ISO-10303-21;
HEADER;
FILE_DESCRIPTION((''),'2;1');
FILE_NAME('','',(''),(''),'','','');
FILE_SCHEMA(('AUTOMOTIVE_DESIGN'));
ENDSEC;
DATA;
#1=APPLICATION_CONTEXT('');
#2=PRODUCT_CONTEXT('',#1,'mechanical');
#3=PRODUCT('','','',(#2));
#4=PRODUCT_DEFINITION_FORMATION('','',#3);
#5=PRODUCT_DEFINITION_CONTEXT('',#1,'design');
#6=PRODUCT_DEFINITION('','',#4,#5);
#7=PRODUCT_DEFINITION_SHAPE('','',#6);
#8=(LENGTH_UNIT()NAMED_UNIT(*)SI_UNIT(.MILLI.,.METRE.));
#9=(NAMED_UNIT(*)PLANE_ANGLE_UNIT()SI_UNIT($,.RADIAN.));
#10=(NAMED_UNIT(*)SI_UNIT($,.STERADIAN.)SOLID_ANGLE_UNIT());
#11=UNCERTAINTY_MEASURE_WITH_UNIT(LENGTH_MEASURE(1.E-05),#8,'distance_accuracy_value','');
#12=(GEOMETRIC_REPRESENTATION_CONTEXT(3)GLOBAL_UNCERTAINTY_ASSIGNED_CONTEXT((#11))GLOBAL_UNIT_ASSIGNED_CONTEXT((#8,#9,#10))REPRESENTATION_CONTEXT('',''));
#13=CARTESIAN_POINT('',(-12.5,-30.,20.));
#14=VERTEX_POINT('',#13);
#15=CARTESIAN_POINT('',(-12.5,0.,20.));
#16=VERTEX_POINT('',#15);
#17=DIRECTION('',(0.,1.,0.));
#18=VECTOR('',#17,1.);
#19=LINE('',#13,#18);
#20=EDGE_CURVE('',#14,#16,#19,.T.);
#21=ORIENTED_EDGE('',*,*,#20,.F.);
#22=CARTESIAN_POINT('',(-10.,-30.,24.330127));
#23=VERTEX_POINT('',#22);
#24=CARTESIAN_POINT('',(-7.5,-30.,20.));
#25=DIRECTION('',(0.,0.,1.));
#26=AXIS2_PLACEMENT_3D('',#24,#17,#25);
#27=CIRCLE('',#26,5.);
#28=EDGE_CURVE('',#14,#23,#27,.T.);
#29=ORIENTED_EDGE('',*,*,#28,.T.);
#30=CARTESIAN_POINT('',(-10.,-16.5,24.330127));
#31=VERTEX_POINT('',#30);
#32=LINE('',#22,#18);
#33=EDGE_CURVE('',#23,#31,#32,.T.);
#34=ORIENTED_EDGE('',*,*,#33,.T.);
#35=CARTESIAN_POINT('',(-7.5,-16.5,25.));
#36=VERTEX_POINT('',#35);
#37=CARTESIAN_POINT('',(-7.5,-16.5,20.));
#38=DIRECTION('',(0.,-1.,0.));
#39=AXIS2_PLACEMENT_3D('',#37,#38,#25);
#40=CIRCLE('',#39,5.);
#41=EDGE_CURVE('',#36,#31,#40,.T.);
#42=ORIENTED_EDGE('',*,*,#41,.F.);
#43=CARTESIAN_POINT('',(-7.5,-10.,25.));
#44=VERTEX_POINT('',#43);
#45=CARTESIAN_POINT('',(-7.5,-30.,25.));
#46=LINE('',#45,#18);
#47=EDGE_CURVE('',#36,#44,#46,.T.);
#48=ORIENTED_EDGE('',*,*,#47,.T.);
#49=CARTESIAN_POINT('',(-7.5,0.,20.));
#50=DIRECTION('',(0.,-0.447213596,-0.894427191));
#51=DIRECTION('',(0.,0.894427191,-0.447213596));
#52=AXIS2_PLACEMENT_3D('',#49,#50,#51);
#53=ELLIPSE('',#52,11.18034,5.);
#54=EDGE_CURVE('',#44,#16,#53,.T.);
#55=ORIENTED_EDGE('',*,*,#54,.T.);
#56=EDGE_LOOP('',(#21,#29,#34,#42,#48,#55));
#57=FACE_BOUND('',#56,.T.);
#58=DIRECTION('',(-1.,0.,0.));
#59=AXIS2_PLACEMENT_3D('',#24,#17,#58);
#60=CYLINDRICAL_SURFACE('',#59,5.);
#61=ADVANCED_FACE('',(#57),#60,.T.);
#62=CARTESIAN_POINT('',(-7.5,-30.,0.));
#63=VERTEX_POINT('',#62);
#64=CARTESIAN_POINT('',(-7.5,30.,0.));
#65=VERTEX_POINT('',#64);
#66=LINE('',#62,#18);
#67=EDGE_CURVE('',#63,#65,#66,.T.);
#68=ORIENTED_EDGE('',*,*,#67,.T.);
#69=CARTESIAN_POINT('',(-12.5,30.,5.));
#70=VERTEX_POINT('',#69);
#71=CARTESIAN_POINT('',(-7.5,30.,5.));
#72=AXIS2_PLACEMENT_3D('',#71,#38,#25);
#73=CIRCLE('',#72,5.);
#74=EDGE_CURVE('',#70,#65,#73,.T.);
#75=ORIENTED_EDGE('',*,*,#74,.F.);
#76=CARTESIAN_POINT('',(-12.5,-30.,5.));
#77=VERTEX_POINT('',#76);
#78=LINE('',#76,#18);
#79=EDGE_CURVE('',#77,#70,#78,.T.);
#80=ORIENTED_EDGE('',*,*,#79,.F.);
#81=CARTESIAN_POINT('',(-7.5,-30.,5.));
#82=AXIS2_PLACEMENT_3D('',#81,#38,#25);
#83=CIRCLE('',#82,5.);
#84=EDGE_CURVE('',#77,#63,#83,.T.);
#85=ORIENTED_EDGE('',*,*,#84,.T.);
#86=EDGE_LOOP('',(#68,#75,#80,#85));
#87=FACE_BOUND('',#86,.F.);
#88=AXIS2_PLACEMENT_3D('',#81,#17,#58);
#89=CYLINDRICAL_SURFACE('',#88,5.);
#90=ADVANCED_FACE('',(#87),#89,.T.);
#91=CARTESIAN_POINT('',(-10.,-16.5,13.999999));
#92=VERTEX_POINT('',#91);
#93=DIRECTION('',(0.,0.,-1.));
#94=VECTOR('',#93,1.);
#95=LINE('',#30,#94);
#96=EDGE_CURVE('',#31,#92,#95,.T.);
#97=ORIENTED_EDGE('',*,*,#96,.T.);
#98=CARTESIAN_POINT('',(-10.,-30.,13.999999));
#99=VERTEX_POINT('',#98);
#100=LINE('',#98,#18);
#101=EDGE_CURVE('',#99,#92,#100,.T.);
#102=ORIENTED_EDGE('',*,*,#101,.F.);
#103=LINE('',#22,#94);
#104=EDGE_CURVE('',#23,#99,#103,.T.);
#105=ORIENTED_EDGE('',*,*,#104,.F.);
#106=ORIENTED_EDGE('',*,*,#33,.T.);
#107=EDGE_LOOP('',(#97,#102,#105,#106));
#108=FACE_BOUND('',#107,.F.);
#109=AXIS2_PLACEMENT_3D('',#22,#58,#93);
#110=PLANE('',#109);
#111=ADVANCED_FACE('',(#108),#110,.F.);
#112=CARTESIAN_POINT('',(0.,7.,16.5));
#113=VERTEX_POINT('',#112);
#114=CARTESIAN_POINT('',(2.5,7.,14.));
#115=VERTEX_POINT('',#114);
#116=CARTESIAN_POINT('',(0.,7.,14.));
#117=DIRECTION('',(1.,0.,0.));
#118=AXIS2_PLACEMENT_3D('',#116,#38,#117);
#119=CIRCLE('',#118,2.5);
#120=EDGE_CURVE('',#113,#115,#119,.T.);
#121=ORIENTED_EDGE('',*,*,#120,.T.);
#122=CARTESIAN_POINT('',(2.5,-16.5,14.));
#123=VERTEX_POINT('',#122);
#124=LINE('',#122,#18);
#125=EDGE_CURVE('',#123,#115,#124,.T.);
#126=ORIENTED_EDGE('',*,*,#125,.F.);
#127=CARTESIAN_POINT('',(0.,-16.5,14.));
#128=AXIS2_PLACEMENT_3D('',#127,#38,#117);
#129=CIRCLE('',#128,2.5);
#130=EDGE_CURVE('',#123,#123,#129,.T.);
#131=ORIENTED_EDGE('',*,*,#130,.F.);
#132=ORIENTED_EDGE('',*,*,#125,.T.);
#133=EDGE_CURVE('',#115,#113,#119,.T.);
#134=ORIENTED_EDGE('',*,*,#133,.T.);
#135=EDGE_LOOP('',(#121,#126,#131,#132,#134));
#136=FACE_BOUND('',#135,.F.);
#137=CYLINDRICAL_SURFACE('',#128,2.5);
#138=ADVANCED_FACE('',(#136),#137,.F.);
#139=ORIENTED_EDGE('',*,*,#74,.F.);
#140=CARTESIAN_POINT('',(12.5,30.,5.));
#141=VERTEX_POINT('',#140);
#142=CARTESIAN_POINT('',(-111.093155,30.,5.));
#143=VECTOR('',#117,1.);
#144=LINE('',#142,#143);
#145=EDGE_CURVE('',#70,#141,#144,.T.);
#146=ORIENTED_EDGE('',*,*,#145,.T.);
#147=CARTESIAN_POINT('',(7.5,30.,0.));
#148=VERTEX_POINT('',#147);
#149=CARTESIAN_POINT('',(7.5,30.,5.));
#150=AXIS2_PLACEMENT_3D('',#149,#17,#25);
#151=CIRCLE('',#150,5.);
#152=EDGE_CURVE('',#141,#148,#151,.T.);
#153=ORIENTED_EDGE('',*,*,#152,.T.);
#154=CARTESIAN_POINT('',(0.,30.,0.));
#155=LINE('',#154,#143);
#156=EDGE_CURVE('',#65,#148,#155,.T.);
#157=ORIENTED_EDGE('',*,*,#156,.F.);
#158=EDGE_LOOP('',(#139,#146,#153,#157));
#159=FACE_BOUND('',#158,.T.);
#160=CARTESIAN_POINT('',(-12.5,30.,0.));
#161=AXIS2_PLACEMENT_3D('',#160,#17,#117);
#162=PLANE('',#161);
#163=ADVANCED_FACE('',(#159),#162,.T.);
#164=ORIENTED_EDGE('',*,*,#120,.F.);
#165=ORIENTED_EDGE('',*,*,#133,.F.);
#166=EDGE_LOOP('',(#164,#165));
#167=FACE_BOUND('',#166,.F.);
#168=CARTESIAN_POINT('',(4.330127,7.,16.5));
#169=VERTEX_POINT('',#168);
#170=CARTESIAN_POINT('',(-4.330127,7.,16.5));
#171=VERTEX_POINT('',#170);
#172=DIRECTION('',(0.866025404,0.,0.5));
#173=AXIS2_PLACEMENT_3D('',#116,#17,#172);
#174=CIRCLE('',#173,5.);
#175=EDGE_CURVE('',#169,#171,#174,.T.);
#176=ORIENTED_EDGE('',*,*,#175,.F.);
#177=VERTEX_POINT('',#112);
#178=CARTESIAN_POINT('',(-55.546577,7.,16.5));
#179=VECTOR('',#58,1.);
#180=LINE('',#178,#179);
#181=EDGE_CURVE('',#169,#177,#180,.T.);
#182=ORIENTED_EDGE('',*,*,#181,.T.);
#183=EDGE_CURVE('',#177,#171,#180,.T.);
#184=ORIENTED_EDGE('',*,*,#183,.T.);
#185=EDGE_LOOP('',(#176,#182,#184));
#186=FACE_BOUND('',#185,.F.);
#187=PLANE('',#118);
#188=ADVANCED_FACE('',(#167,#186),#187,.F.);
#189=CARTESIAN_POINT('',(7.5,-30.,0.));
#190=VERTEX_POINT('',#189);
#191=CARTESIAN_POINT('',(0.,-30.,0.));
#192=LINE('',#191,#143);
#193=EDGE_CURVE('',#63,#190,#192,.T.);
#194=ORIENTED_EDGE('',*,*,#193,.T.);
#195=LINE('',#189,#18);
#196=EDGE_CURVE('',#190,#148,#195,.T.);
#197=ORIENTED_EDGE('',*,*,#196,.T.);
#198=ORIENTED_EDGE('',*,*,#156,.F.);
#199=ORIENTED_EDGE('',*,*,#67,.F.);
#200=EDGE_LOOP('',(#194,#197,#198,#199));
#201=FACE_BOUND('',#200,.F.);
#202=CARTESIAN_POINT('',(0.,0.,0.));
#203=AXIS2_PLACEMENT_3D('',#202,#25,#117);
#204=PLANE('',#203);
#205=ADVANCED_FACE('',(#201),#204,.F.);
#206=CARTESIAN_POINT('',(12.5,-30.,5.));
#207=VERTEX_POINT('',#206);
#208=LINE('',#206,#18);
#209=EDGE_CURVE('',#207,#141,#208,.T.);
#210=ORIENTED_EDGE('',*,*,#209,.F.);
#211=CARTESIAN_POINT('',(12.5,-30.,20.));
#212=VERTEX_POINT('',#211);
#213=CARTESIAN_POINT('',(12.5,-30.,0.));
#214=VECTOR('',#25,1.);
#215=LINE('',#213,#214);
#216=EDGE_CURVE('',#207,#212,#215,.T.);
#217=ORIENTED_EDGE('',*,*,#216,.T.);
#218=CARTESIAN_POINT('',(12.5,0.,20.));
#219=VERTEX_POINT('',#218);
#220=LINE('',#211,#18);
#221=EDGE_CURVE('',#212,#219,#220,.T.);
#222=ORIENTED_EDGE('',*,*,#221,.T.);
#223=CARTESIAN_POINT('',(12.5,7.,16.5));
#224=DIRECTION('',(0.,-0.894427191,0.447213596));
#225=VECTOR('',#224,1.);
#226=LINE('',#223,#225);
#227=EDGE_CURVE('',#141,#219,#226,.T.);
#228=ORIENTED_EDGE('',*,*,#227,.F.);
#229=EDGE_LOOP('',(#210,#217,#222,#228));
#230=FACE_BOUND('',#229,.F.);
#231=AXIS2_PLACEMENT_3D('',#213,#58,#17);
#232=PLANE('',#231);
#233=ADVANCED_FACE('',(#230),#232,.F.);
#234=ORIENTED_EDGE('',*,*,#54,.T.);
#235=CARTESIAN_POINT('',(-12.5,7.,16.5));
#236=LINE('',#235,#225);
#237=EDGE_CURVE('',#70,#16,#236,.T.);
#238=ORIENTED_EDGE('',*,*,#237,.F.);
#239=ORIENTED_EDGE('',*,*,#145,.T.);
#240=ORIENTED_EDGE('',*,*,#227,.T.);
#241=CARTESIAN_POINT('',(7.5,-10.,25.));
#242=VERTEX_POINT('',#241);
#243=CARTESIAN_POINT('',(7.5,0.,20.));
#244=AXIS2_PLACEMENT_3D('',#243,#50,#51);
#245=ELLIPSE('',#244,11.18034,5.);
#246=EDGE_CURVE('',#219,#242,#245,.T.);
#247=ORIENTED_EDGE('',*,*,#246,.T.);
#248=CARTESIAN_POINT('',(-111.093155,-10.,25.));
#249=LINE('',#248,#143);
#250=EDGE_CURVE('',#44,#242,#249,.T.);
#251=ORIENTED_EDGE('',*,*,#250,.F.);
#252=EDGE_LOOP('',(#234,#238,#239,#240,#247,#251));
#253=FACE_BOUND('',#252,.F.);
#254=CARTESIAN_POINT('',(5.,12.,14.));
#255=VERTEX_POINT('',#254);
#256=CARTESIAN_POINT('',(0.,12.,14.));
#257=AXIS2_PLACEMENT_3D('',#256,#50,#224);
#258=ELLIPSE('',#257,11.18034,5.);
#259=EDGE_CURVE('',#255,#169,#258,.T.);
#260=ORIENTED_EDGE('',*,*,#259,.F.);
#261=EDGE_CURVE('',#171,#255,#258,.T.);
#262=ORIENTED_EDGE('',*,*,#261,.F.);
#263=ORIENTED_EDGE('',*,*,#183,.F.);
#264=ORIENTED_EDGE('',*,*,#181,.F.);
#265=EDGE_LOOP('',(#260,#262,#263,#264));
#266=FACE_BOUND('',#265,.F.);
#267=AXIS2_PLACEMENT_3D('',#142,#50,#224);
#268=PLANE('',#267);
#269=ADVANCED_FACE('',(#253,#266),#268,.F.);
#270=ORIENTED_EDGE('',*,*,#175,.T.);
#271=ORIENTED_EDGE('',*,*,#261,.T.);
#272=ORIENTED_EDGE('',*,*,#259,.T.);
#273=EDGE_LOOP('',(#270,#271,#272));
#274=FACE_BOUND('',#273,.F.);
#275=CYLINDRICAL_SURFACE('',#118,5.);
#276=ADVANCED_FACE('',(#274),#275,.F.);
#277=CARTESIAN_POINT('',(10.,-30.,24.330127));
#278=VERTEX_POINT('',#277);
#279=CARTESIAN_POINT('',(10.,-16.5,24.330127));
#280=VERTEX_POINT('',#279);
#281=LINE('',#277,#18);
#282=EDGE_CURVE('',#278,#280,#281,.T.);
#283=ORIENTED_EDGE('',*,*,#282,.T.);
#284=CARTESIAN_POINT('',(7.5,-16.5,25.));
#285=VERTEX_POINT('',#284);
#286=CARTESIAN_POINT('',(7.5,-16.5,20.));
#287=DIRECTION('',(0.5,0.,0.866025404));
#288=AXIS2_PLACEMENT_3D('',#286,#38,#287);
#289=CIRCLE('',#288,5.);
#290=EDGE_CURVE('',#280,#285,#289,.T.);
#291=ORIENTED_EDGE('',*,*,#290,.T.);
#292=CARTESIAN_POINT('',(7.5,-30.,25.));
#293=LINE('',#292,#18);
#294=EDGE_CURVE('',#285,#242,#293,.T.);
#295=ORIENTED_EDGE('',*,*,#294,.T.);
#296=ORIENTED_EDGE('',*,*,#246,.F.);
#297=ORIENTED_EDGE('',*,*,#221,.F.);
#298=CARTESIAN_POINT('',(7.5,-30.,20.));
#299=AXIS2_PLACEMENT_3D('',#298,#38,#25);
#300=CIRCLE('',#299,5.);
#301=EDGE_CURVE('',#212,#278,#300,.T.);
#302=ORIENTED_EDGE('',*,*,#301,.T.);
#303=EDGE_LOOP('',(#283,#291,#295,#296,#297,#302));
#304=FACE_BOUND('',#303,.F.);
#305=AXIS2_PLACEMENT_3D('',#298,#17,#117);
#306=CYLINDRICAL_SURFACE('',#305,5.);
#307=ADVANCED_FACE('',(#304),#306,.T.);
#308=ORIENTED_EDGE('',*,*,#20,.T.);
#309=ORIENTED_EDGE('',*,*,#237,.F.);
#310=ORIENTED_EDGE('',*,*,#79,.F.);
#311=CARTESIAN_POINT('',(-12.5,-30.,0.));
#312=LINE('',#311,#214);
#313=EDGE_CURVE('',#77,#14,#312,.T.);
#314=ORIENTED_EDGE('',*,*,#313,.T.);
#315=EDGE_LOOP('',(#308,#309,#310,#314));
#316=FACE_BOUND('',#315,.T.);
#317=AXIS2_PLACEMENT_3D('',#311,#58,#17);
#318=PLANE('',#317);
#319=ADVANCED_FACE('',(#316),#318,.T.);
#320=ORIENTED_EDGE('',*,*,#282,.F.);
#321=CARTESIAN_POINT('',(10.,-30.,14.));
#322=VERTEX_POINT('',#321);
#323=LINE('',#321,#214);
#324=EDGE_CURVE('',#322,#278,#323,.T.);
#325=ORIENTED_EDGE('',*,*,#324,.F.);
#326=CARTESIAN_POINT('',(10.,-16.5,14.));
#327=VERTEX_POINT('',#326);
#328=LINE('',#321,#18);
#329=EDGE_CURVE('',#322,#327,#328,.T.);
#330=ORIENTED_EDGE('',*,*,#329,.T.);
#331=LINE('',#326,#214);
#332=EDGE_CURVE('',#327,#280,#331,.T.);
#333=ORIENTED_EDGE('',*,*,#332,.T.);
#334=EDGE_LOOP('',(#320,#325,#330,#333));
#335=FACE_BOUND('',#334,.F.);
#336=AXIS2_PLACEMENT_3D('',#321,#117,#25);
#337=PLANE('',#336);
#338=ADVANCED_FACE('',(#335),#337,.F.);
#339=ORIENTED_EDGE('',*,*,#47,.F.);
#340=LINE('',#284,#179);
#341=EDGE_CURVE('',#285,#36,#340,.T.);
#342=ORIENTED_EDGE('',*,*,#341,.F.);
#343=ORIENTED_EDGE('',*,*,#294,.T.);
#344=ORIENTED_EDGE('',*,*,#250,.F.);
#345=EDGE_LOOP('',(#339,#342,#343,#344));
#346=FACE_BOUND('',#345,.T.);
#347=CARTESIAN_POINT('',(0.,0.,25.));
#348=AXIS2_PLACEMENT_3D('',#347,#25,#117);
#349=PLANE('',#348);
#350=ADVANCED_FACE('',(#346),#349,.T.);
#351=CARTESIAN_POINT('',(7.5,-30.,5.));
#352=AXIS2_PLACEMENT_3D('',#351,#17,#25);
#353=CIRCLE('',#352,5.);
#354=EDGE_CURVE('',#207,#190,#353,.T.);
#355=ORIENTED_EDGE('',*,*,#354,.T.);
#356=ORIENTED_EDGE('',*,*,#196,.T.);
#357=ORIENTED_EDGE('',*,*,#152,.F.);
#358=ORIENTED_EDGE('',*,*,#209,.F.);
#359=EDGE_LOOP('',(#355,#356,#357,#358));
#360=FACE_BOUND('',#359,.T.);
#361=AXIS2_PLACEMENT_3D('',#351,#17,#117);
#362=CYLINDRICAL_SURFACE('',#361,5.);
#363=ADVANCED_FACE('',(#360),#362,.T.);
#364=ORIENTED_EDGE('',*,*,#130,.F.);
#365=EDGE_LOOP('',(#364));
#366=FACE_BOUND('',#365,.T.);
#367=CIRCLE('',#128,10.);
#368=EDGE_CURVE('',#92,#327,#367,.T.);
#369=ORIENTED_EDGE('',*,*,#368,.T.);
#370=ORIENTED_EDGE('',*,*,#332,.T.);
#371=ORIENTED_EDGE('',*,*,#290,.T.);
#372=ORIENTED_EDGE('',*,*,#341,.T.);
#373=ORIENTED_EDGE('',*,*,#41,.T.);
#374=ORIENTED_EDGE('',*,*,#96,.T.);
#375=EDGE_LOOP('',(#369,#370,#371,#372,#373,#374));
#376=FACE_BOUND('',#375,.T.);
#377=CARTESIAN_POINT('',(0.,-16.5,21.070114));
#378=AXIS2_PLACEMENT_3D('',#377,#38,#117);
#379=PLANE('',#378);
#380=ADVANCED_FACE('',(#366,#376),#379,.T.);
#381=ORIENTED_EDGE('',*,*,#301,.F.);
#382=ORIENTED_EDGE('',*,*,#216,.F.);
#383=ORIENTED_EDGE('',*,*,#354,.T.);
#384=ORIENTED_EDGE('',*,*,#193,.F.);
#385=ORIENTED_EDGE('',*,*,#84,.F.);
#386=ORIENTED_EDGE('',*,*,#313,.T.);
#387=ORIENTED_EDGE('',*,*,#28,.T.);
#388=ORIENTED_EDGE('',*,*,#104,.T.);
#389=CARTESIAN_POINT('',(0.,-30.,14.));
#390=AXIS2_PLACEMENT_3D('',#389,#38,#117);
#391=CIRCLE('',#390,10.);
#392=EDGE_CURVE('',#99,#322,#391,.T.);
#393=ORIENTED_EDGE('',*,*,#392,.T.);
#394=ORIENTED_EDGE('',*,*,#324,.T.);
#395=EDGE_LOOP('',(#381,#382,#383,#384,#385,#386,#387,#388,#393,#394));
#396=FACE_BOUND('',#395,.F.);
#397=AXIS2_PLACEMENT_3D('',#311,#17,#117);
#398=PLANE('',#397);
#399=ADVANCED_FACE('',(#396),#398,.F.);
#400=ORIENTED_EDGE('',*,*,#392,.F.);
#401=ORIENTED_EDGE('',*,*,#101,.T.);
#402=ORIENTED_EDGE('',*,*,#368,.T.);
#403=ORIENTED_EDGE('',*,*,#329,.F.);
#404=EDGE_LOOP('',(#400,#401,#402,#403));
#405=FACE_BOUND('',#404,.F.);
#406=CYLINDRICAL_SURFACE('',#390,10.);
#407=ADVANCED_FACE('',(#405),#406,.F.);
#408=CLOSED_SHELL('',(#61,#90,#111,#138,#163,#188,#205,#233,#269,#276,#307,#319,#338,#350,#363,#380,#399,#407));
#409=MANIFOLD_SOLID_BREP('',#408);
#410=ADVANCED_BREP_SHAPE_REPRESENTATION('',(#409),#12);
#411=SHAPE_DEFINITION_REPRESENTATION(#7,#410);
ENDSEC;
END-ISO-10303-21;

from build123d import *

# Parameters (mm, degrees)
F0_W        = 25
F0_H        = 60
F1_DEPTH    = 25
F2_R        = 5
F4_DEPTH    = 13.5
F5_DEPTH    = 13.5
F6_T1_DEPTH = 222.1863099029
F7_R        = 2.5
F8_DEPTH    = 55
F10_START   = -23.5
F9_R        = 5
F10_DEPTH   = 23


# Not quite as in the source:
# - a fillet or chamfer that OpenCascade refuses, or shapes differently, is made with other operations: its cross-section is extruded or revolved along the edge and cut away or added
# - ends of sketch curves that miss each other by under 0.0002 mm in the source are joined


with BuildPart() as f1:
    # F0 (on Top) → F1 (new body)
    with BuildSketch(Plane.XY):
        Rectangle(F0_W, F0_H)
    extrude(amount=F1_DEPTH)

    # F2
    f2_edges = [f1.edges().sort_by_distance(p)[0] for p in [
        (12.5, 0, 25),
        (12.5, 0, 0),
        (-12.5, 0, 0),
        (-12.5, 0, 25),
    ]]
    fillet(f2_edges, radius=F2_R)

    # F3 (on face) → F4 (cut)
    with BuildSketch(Plane.XZ.offset(30)):
        with BuildLine():
            Line((-10, 13.9999993678), (10, 13.9999993678))
            ThreePointArc((10, 13.9999993678), (-3.161e-07, 24), (-10, 13.9999993678))
        make_face()
        with BuildLine():
            ThreePointArc((-10, 13.9999993678), (3.161e-07, 4), (10, 14))
            Line((10, 14), (-10, 13.9999993678))
        make_face()
    extrude(amount=-F4_DEPTH, mode=Mode.SUBTRACT)

    # F3 (on face) → F5 (cut)
    with BuildSketch(Plane.XZ.offset(30)):
        with BuildLine():
            ThreePointArc((-10, 13.9999993678), (-3.161e-07, 24), (10, 14))
            Line((10, 14), (10, 24.3301270189))
            ThreePointArc((10, 24.3301270189), (8.7940952255, 24.8296291314), (7.5, 25))
            Line((7.5, 25), (-7.5, 25))
            ThreePointArc((-7.5, 25), (-8.7940952255, 24.8296291314), (-10, 24.3301270189))
            Line((-10, 24.3301270189), (-10, 13.9999993678))
        make_face()
    extrude(amount=-F5_DEPTH, mode=Mode.SUBTRACT)

    # F6: chamfer of 40 x 20 on 1 edges, made by hand

    # F6_s2 → F6_t1 (cut)
    with BuildSketch(Plane.YZ.offset(-111.0931549515)):
        Polygon((30, 5), (-10, 25), (30, 25), align=None)
    extrude(amount=F6_T1_DEPTH, mode=Mode.SUBTRACT)

    # F7 (on face) → F8 (cut)
    with BuildSketch(Plane.XZ.offset(16.5)):
        with Locations((0, 14)):
            Circle(F7_R)
    extrude(amount=-F8_DEPTH, mode=Mode.SUBTRACT)

    # F9 (on face) → F10 (cut)
    with BuildSketch(Plane.XZ.offset(16.5).offset(F10_START)):
        with Locations((0, 14)):
            Circle(F9_R)
    extrude(amount=-F10_DEPTH, mode=Mode.SUBTRACT)


solid = f1.part
